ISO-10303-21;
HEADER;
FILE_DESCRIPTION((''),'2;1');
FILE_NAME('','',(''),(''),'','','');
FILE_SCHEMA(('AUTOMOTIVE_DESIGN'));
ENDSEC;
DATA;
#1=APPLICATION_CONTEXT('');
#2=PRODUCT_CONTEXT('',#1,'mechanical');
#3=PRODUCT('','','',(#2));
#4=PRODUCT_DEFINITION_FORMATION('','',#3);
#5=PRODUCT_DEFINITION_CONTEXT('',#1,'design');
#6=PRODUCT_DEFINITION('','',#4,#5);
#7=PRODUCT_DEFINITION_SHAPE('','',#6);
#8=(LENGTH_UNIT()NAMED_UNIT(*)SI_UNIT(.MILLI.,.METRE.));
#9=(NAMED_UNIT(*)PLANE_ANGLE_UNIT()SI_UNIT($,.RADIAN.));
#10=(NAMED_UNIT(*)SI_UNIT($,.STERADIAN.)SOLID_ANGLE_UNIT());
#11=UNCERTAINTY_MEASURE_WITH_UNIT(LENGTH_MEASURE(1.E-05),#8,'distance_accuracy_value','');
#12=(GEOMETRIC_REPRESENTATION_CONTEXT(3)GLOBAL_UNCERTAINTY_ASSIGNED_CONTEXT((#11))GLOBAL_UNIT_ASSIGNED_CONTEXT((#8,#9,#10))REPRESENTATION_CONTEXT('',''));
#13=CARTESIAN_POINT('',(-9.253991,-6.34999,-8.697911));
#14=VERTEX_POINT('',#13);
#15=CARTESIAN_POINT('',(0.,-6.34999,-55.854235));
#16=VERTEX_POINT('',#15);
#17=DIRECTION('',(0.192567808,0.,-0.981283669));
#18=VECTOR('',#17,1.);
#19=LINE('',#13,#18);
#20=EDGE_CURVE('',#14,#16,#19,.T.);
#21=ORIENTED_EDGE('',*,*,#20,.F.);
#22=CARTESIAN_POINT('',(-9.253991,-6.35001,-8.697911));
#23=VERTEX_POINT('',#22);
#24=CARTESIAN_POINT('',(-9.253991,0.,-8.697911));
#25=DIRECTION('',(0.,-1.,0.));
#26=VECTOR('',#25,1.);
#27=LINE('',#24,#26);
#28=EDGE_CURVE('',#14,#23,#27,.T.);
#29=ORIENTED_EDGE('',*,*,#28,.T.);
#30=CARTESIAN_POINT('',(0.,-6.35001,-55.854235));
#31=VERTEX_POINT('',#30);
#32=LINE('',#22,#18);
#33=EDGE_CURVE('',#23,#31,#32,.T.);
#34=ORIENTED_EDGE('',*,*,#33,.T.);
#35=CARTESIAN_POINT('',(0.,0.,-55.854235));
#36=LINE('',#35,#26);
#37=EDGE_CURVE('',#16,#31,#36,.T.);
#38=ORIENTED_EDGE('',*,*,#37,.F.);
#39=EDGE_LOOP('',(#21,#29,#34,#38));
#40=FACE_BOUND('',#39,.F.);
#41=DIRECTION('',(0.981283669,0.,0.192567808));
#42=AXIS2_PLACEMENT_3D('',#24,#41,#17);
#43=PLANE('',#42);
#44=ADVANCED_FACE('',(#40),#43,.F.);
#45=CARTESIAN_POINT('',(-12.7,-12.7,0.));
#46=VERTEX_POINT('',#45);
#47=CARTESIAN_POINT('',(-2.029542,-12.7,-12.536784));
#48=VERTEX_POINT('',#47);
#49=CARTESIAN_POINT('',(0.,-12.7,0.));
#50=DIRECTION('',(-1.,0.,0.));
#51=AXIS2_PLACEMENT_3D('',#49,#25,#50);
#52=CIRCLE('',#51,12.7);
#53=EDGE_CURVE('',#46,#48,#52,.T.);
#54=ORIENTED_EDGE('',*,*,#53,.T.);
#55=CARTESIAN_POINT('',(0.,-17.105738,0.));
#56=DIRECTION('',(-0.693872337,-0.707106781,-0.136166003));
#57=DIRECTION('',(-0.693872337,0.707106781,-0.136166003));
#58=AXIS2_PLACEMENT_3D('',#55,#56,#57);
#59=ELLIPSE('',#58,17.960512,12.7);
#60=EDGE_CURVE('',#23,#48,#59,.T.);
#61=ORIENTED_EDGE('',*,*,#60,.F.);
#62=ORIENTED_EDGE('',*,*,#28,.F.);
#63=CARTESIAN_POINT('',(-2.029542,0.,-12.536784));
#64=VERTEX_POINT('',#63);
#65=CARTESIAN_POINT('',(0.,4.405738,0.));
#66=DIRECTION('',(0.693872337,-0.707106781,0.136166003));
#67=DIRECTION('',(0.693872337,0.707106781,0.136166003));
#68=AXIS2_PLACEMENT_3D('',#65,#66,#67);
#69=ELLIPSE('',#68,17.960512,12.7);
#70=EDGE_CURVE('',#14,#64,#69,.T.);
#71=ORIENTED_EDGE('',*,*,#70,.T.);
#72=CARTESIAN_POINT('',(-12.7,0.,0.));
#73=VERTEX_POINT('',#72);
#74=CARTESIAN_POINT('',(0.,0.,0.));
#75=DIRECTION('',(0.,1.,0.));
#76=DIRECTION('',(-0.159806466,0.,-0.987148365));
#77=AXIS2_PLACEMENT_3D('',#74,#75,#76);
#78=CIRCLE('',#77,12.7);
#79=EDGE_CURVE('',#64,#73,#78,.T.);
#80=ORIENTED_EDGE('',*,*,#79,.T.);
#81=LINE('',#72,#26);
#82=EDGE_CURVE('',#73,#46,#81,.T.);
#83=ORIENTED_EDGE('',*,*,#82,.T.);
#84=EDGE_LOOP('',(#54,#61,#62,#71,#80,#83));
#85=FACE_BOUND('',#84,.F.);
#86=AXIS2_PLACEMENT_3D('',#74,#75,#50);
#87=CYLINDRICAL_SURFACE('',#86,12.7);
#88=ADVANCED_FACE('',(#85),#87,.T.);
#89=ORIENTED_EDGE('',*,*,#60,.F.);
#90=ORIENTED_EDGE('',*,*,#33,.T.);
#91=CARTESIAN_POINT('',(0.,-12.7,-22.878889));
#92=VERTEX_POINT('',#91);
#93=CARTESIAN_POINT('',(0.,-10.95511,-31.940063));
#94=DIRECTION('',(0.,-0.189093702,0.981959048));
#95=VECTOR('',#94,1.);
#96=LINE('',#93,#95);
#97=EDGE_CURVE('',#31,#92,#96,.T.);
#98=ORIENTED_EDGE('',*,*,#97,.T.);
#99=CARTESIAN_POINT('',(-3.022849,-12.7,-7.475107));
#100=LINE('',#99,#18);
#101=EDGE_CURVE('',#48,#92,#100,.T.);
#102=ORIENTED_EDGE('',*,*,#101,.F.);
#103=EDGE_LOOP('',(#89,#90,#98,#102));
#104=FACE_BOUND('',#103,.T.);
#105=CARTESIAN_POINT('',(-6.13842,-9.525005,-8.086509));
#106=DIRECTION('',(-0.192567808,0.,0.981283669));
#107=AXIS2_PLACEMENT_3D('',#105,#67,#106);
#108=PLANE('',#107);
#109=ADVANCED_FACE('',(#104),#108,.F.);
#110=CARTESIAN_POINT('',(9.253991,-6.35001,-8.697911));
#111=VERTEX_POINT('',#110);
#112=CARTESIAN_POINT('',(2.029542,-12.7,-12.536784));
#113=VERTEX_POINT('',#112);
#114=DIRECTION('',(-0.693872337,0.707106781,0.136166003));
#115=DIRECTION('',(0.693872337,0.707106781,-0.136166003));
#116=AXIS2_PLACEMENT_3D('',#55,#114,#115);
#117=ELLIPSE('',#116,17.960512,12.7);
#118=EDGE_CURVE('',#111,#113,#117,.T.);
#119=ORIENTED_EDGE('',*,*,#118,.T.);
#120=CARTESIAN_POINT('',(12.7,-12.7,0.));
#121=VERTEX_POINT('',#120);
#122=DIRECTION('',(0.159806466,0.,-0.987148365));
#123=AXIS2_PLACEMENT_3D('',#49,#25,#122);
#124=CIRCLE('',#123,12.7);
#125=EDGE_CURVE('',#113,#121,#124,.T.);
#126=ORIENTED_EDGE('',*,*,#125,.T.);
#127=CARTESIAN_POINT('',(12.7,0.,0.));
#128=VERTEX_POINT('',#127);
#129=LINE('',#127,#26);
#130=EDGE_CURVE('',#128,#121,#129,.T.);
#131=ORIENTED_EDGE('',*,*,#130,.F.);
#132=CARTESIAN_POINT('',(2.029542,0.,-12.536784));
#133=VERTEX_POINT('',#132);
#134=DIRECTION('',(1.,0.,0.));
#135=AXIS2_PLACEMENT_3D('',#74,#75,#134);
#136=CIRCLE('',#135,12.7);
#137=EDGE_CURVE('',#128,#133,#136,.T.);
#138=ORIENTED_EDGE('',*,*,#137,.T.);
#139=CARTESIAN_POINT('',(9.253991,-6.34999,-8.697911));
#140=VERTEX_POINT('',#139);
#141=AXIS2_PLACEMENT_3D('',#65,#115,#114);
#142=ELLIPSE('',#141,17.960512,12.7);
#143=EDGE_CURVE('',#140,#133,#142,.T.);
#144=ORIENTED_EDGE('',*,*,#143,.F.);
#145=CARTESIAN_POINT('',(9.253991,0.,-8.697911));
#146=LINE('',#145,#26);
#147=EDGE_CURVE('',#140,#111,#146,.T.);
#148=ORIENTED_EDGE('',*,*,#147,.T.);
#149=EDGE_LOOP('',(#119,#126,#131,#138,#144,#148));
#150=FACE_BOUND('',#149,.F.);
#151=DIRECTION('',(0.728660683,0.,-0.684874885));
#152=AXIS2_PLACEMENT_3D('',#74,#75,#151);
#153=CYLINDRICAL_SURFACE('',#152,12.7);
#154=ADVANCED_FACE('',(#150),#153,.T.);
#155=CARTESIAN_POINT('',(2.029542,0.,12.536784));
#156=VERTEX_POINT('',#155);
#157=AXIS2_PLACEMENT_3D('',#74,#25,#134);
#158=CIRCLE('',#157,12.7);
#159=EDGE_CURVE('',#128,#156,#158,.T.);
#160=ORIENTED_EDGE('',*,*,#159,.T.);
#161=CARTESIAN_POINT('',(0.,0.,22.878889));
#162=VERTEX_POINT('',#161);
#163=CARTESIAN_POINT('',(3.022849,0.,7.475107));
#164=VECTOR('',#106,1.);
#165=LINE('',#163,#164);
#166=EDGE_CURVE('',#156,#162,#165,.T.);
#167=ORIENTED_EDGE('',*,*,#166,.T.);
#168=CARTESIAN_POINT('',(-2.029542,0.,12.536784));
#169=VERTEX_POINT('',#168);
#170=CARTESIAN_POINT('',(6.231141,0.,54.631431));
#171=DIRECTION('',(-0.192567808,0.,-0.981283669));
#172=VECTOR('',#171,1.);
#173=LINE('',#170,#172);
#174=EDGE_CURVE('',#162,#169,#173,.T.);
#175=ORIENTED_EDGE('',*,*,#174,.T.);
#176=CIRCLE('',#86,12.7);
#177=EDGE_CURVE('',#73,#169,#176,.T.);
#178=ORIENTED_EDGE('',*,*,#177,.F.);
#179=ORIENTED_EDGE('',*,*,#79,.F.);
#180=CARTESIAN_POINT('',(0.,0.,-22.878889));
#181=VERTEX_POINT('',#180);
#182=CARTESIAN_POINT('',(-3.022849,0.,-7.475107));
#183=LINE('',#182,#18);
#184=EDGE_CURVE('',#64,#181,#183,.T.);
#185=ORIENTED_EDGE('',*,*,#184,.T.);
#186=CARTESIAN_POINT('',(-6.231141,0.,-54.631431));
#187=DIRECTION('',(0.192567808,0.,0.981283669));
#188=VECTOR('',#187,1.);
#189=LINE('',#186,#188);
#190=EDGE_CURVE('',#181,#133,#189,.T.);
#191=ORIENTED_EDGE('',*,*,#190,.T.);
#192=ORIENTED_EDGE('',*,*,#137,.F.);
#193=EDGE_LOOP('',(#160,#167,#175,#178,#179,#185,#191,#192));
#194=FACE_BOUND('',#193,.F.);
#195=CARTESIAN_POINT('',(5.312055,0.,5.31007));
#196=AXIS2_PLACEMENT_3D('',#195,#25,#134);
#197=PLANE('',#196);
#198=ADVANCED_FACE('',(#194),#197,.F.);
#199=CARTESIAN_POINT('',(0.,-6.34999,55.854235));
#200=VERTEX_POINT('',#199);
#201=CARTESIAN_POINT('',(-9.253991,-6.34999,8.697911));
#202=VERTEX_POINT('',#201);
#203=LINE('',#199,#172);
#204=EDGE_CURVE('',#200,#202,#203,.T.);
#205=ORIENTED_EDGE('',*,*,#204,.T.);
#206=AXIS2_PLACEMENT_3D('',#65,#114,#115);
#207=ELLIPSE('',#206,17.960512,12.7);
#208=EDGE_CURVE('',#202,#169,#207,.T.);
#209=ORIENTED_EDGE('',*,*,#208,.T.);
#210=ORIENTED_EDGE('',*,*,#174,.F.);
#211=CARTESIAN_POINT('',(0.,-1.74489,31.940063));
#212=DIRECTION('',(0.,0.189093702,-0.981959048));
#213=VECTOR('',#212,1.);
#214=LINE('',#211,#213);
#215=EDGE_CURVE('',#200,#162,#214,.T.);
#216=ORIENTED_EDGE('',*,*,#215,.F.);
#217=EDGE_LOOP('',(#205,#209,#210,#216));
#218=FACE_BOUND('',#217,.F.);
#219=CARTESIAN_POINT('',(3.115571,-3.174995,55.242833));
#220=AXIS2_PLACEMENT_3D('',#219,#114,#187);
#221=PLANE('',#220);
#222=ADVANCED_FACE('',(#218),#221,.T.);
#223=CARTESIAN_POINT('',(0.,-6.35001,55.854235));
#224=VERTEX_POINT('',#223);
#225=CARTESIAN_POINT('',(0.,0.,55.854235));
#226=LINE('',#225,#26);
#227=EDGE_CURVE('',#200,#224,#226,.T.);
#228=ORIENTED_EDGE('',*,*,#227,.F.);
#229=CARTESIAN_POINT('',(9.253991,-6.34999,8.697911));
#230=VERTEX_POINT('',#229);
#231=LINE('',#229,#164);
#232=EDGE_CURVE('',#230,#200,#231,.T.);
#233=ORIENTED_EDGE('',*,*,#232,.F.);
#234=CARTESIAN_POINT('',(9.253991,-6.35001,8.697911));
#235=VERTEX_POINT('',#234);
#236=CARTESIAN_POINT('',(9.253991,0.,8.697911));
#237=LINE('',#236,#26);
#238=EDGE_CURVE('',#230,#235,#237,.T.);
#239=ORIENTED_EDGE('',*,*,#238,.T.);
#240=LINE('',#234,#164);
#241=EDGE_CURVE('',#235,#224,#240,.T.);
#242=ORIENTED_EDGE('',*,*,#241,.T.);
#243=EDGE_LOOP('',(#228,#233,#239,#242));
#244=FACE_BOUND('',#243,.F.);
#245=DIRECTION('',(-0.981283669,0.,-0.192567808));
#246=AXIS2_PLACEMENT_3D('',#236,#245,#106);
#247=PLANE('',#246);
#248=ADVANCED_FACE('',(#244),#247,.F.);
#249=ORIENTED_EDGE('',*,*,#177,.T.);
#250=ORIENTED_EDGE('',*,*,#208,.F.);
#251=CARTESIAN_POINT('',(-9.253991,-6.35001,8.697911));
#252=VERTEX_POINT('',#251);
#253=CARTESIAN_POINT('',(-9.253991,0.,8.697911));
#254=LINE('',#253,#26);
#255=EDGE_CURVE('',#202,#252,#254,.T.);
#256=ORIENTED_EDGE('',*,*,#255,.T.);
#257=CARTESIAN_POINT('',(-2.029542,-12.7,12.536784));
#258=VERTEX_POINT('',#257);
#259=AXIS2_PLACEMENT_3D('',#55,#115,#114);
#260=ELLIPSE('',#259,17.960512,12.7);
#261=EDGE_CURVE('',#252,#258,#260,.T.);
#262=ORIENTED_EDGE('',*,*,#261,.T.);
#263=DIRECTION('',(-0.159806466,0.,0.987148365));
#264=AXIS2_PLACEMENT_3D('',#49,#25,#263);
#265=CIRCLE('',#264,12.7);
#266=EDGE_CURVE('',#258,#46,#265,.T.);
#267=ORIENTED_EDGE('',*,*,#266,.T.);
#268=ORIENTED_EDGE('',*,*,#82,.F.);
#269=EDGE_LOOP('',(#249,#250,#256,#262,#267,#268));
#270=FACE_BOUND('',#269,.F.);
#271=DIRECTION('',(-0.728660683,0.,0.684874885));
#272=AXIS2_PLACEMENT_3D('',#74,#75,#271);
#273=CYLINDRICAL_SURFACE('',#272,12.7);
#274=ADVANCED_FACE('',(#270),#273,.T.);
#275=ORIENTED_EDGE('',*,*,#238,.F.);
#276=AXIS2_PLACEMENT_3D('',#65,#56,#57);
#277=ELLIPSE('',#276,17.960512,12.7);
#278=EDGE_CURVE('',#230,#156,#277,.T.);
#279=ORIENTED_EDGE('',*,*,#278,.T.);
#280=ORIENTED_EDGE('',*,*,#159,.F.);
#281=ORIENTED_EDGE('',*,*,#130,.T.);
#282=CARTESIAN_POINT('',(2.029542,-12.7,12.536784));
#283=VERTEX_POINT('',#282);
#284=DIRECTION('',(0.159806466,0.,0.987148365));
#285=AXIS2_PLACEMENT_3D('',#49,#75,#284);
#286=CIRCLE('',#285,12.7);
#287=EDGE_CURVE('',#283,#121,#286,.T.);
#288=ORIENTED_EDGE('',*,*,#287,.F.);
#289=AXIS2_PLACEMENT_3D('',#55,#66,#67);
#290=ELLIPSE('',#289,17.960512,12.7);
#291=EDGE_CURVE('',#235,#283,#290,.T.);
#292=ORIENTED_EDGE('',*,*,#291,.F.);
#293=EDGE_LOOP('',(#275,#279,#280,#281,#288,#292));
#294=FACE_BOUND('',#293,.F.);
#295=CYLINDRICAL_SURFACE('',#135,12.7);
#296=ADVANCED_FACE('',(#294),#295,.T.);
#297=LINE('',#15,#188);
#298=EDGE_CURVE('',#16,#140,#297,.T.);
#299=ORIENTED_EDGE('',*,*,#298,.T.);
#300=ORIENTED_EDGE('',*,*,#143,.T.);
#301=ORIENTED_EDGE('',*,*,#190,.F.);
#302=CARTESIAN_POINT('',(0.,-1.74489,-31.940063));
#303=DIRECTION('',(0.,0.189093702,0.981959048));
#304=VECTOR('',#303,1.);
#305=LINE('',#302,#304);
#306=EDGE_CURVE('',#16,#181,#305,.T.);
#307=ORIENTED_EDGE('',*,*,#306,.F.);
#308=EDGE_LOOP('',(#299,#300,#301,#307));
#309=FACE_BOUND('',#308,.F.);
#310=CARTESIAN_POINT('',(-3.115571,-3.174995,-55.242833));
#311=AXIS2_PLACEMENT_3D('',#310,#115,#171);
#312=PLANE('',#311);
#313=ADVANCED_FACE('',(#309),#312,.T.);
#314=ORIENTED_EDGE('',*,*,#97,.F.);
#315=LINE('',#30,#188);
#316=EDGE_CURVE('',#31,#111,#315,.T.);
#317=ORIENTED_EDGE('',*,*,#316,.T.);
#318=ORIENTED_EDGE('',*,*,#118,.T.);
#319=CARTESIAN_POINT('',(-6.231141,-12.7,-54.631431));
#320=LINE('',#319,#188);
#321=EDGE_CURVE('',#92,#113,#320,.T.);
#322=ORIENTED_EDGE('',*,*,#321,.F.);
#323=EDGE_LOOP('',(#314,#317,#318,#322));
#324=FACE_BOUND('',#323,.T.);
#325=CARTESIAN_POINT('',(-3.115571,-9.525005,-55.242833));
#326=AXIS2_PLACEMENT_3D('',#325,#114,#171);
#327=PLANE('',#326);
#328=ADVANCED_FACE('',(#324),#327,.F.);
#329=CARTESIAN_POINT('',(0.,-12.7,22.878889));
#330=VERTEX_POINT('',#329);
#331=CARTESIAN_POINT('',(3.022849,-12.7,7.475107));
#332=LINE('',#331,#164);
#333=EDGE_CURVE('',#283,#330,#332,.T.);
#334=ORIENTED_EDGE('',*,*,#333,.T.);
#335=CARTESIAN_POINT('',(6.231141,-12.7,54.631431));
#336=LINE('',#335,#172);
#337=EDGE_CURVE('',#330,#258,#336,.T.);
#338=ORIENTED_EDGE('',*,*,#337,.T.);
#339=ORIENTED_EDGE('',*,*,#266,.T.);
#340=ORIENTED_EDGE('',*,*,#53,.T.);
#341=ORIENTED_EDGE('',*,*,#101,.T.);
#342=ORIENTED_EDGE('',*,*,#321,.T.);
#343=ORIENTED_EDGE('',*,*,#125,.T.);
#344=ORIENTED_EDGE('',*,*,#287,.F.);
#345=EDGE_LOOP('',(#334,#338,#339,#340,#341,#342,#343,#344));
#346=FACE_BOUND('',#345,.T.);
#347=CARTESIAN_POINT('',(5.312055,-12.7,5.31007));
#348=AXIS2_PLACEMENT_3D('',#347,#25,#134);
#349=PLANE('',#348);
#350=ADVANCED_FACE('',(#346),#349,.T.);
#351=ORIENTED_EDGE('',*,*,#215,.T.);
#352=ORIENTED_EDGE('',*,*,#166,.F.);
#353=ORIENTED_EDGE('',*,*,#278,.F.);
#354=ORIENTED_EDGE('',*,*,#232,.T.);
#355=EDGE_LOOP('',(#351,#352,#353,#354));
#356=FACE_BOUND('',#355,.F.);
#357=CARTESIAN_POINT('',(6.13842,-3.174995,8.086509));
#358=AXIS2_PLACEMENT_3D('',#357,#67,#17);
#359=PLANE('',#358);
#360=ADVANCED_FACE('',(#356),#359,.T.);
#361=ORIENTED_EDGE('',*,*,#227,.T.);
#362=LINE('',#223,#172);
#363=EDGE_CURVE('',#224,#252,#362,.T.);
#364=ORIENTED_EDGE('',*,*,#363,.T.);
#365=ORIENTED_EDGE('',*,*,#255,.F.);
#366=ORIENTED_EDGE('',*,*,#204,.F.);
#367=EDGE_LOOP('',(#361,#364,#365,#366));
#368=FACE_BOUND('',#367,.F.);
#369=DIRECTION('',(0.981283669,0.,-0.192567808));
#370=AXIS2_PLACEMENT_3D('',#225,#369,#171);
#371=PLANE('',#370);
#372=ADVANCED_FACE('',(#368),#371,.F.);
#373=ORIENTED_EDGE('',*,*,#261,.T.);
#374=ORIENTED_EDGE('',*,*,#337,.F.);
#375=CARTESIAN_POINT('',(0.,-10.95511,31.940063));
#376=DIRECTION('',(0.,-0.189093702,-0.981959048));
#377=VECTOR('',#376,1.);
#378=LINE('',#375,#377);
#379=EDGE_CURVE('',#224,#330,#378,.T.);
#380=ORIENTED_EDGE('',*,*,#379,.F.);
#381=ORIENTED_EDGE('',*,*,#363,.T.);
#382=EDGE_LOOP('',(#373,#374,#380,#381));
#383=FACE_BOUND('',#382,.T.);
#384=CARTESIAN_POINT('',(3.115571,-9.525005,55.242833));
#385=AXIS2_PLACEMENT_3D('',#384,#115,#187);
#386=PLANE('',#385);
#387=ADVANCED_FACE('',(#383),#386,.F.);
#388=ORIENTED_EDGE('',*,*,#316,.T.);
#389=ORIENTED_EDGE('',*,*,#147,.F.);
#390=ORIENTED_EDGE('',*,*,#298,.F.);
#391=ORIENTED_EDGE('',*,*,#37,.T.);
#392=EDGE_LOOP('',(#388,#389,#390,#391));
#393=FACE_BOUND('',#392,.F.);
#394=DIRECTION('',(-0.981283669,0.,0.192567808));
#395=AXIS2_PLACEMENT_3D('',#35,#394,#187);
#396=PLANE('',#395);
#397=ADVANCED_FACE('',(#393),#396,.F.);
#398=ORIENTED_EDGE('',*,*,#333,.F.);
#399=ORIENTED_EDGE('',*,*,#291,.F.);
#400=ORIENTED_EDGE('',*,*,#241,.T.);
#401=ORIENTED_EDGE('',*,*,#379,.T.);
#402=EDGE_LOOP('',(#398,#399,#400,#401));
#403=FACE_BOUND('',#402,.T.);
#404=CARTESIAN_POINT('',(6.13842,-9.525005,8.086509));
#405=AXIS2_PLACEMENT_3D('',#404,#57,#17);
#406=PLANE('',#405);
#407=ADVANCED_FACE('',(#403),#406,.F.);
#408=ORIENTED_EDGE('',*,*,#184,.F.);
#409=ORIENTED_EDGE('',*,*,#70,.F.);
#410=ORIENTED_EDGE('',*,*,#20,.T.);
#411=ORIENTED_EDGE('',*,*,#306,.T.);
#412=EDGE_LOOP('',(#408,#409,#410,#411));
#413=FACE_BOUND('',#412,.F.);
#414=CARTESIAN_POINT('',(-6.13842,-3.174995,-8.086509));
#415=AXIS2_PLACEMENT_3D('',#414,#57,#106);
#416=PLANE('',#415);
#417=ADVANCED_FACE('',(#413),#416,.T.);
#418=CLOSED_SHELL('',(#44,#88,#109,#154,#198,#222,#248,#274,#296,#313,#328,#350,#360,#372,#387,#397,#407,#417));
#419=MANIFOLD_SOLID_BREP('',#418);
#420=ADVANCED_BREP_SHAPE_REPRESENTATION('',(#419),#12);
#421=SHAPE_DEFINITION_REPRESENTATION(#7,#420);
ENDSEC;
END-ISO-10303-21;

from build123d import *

# Parameters (mm, degrees)
F1_DEPTH = 12.7
F2_SIZE  = 6.34999


# Not quite as in the source:
# - a fillet or chamfer is up to 0.001 mm smaller than in the source, because OpenCascade refuses the exact size


with BuildPart() as f1:
    # F0 (on Front) → F1 (new body)
    with BuildSketch(Plane.XZ):
        with BuildLine():
            Line((0, 0), (12.7, 0))
            ThreePointArc((12.7, 0), (11.8071097568, 4.6778370206), (9.2539906785, 8.6979110436))
            ThreePointArc((9.2539906785, 8.6979110436), (5.0411570967, 11.6566176538), (0, 12.7))
            Line((0, 12.7), (0, 0))
        make_face()
        with BuildLine():
            ThreePointArc((9.2539906785, -8.6979110436), (11.8071097568, -4.6778370206), (12.7, 0))
            Line((12.7, 0), (0, 0))
            Line((0, 0), (0, -12.7))
            ThreePointArc((0, -12.7), (5.0411570967, -11.6566176538), (9.2539906785, -8.6979110436))
        make_face()
        with BuildLine():
            ThreePointArc((0, 12.7), (5.0411570967, 11.6566176538), (9.2539906785, 8.6979110436))
            Line((9.2539906785, 8.6979110436), (0, 55.8542348444))
            Line((0, 55.8542348444), (-9.2539906785, 8.6979110436))
            ThreePointArc((-9.2539906785, 8.6979110436), (-5.0411570967, 11.6566176538), (0, 12.7))
        make_face()
        with BuildLine():
            Line((0, -55.8542348444), (9.2539906785, -8.6979110436))
            ThreePointArc((9.2539906785, -8.6979110436), (5.0411570967, -11.6566176538), (0, -12.7))
            ThreePointArc((0, -12.7), (-5.0411570967, -11.6566176538), (-9.2539906785, -8.6979110436))
            Line((-9.2539906785, -8.6979110436), (0, -55.8542348444))
        make_face()
        with BuildLine():
            Line((-12.7, 0), (0, 0))
            Line((0, 0), (0, 12.7))
            ThreePointArc((0, 12.7), (-5.0411570967, 11.6566176538), (-9.2539906785, 8.6979110436))
            ThreePointArc((-9.2539906785, 8.6979110436), (-11.8071097568, 4.6778370206), (-12.7, 0))
        make_face()
        with BuildLine():
            Line((0, -12.7), (0, 0))
            Line((0, 0), (-12.7, 0))
            ThreePointArc((-12.7, 0), (-11.8071097568, -4.6778370206), (-9.2539906785, -8.6979110436))
            ThreePointArc((-9.2539906785, -8.6979110436), (-5.0411570967, -11.6566176538), (0, -12.7))
        make_face()
    extrude(amount=F1_DEPTH)

    # F2 (size 6.35 in the source; OpenCascade refuses exactly that, so slightly less here)
    f2_edges = [f1.edges().sort_by_distance(p)[0] for p in [
        (4.626995, -12.7, 32.276073),
        (4.626995, 0, 32.276073),
        (-4.626995, -12.7, 32.276073),
        (-4.626995, 0, 32.276073),
        (-4.626995, -12.7, -32.276073),
        (4.626995, -12.7, -32.276073),
        (-4.626995, 0, -32.276073),
        (4.626995, 0, -32.276073),
    ]]
    chamfer(f2_edges, length=F2_SIZE)


solid = f1.part
